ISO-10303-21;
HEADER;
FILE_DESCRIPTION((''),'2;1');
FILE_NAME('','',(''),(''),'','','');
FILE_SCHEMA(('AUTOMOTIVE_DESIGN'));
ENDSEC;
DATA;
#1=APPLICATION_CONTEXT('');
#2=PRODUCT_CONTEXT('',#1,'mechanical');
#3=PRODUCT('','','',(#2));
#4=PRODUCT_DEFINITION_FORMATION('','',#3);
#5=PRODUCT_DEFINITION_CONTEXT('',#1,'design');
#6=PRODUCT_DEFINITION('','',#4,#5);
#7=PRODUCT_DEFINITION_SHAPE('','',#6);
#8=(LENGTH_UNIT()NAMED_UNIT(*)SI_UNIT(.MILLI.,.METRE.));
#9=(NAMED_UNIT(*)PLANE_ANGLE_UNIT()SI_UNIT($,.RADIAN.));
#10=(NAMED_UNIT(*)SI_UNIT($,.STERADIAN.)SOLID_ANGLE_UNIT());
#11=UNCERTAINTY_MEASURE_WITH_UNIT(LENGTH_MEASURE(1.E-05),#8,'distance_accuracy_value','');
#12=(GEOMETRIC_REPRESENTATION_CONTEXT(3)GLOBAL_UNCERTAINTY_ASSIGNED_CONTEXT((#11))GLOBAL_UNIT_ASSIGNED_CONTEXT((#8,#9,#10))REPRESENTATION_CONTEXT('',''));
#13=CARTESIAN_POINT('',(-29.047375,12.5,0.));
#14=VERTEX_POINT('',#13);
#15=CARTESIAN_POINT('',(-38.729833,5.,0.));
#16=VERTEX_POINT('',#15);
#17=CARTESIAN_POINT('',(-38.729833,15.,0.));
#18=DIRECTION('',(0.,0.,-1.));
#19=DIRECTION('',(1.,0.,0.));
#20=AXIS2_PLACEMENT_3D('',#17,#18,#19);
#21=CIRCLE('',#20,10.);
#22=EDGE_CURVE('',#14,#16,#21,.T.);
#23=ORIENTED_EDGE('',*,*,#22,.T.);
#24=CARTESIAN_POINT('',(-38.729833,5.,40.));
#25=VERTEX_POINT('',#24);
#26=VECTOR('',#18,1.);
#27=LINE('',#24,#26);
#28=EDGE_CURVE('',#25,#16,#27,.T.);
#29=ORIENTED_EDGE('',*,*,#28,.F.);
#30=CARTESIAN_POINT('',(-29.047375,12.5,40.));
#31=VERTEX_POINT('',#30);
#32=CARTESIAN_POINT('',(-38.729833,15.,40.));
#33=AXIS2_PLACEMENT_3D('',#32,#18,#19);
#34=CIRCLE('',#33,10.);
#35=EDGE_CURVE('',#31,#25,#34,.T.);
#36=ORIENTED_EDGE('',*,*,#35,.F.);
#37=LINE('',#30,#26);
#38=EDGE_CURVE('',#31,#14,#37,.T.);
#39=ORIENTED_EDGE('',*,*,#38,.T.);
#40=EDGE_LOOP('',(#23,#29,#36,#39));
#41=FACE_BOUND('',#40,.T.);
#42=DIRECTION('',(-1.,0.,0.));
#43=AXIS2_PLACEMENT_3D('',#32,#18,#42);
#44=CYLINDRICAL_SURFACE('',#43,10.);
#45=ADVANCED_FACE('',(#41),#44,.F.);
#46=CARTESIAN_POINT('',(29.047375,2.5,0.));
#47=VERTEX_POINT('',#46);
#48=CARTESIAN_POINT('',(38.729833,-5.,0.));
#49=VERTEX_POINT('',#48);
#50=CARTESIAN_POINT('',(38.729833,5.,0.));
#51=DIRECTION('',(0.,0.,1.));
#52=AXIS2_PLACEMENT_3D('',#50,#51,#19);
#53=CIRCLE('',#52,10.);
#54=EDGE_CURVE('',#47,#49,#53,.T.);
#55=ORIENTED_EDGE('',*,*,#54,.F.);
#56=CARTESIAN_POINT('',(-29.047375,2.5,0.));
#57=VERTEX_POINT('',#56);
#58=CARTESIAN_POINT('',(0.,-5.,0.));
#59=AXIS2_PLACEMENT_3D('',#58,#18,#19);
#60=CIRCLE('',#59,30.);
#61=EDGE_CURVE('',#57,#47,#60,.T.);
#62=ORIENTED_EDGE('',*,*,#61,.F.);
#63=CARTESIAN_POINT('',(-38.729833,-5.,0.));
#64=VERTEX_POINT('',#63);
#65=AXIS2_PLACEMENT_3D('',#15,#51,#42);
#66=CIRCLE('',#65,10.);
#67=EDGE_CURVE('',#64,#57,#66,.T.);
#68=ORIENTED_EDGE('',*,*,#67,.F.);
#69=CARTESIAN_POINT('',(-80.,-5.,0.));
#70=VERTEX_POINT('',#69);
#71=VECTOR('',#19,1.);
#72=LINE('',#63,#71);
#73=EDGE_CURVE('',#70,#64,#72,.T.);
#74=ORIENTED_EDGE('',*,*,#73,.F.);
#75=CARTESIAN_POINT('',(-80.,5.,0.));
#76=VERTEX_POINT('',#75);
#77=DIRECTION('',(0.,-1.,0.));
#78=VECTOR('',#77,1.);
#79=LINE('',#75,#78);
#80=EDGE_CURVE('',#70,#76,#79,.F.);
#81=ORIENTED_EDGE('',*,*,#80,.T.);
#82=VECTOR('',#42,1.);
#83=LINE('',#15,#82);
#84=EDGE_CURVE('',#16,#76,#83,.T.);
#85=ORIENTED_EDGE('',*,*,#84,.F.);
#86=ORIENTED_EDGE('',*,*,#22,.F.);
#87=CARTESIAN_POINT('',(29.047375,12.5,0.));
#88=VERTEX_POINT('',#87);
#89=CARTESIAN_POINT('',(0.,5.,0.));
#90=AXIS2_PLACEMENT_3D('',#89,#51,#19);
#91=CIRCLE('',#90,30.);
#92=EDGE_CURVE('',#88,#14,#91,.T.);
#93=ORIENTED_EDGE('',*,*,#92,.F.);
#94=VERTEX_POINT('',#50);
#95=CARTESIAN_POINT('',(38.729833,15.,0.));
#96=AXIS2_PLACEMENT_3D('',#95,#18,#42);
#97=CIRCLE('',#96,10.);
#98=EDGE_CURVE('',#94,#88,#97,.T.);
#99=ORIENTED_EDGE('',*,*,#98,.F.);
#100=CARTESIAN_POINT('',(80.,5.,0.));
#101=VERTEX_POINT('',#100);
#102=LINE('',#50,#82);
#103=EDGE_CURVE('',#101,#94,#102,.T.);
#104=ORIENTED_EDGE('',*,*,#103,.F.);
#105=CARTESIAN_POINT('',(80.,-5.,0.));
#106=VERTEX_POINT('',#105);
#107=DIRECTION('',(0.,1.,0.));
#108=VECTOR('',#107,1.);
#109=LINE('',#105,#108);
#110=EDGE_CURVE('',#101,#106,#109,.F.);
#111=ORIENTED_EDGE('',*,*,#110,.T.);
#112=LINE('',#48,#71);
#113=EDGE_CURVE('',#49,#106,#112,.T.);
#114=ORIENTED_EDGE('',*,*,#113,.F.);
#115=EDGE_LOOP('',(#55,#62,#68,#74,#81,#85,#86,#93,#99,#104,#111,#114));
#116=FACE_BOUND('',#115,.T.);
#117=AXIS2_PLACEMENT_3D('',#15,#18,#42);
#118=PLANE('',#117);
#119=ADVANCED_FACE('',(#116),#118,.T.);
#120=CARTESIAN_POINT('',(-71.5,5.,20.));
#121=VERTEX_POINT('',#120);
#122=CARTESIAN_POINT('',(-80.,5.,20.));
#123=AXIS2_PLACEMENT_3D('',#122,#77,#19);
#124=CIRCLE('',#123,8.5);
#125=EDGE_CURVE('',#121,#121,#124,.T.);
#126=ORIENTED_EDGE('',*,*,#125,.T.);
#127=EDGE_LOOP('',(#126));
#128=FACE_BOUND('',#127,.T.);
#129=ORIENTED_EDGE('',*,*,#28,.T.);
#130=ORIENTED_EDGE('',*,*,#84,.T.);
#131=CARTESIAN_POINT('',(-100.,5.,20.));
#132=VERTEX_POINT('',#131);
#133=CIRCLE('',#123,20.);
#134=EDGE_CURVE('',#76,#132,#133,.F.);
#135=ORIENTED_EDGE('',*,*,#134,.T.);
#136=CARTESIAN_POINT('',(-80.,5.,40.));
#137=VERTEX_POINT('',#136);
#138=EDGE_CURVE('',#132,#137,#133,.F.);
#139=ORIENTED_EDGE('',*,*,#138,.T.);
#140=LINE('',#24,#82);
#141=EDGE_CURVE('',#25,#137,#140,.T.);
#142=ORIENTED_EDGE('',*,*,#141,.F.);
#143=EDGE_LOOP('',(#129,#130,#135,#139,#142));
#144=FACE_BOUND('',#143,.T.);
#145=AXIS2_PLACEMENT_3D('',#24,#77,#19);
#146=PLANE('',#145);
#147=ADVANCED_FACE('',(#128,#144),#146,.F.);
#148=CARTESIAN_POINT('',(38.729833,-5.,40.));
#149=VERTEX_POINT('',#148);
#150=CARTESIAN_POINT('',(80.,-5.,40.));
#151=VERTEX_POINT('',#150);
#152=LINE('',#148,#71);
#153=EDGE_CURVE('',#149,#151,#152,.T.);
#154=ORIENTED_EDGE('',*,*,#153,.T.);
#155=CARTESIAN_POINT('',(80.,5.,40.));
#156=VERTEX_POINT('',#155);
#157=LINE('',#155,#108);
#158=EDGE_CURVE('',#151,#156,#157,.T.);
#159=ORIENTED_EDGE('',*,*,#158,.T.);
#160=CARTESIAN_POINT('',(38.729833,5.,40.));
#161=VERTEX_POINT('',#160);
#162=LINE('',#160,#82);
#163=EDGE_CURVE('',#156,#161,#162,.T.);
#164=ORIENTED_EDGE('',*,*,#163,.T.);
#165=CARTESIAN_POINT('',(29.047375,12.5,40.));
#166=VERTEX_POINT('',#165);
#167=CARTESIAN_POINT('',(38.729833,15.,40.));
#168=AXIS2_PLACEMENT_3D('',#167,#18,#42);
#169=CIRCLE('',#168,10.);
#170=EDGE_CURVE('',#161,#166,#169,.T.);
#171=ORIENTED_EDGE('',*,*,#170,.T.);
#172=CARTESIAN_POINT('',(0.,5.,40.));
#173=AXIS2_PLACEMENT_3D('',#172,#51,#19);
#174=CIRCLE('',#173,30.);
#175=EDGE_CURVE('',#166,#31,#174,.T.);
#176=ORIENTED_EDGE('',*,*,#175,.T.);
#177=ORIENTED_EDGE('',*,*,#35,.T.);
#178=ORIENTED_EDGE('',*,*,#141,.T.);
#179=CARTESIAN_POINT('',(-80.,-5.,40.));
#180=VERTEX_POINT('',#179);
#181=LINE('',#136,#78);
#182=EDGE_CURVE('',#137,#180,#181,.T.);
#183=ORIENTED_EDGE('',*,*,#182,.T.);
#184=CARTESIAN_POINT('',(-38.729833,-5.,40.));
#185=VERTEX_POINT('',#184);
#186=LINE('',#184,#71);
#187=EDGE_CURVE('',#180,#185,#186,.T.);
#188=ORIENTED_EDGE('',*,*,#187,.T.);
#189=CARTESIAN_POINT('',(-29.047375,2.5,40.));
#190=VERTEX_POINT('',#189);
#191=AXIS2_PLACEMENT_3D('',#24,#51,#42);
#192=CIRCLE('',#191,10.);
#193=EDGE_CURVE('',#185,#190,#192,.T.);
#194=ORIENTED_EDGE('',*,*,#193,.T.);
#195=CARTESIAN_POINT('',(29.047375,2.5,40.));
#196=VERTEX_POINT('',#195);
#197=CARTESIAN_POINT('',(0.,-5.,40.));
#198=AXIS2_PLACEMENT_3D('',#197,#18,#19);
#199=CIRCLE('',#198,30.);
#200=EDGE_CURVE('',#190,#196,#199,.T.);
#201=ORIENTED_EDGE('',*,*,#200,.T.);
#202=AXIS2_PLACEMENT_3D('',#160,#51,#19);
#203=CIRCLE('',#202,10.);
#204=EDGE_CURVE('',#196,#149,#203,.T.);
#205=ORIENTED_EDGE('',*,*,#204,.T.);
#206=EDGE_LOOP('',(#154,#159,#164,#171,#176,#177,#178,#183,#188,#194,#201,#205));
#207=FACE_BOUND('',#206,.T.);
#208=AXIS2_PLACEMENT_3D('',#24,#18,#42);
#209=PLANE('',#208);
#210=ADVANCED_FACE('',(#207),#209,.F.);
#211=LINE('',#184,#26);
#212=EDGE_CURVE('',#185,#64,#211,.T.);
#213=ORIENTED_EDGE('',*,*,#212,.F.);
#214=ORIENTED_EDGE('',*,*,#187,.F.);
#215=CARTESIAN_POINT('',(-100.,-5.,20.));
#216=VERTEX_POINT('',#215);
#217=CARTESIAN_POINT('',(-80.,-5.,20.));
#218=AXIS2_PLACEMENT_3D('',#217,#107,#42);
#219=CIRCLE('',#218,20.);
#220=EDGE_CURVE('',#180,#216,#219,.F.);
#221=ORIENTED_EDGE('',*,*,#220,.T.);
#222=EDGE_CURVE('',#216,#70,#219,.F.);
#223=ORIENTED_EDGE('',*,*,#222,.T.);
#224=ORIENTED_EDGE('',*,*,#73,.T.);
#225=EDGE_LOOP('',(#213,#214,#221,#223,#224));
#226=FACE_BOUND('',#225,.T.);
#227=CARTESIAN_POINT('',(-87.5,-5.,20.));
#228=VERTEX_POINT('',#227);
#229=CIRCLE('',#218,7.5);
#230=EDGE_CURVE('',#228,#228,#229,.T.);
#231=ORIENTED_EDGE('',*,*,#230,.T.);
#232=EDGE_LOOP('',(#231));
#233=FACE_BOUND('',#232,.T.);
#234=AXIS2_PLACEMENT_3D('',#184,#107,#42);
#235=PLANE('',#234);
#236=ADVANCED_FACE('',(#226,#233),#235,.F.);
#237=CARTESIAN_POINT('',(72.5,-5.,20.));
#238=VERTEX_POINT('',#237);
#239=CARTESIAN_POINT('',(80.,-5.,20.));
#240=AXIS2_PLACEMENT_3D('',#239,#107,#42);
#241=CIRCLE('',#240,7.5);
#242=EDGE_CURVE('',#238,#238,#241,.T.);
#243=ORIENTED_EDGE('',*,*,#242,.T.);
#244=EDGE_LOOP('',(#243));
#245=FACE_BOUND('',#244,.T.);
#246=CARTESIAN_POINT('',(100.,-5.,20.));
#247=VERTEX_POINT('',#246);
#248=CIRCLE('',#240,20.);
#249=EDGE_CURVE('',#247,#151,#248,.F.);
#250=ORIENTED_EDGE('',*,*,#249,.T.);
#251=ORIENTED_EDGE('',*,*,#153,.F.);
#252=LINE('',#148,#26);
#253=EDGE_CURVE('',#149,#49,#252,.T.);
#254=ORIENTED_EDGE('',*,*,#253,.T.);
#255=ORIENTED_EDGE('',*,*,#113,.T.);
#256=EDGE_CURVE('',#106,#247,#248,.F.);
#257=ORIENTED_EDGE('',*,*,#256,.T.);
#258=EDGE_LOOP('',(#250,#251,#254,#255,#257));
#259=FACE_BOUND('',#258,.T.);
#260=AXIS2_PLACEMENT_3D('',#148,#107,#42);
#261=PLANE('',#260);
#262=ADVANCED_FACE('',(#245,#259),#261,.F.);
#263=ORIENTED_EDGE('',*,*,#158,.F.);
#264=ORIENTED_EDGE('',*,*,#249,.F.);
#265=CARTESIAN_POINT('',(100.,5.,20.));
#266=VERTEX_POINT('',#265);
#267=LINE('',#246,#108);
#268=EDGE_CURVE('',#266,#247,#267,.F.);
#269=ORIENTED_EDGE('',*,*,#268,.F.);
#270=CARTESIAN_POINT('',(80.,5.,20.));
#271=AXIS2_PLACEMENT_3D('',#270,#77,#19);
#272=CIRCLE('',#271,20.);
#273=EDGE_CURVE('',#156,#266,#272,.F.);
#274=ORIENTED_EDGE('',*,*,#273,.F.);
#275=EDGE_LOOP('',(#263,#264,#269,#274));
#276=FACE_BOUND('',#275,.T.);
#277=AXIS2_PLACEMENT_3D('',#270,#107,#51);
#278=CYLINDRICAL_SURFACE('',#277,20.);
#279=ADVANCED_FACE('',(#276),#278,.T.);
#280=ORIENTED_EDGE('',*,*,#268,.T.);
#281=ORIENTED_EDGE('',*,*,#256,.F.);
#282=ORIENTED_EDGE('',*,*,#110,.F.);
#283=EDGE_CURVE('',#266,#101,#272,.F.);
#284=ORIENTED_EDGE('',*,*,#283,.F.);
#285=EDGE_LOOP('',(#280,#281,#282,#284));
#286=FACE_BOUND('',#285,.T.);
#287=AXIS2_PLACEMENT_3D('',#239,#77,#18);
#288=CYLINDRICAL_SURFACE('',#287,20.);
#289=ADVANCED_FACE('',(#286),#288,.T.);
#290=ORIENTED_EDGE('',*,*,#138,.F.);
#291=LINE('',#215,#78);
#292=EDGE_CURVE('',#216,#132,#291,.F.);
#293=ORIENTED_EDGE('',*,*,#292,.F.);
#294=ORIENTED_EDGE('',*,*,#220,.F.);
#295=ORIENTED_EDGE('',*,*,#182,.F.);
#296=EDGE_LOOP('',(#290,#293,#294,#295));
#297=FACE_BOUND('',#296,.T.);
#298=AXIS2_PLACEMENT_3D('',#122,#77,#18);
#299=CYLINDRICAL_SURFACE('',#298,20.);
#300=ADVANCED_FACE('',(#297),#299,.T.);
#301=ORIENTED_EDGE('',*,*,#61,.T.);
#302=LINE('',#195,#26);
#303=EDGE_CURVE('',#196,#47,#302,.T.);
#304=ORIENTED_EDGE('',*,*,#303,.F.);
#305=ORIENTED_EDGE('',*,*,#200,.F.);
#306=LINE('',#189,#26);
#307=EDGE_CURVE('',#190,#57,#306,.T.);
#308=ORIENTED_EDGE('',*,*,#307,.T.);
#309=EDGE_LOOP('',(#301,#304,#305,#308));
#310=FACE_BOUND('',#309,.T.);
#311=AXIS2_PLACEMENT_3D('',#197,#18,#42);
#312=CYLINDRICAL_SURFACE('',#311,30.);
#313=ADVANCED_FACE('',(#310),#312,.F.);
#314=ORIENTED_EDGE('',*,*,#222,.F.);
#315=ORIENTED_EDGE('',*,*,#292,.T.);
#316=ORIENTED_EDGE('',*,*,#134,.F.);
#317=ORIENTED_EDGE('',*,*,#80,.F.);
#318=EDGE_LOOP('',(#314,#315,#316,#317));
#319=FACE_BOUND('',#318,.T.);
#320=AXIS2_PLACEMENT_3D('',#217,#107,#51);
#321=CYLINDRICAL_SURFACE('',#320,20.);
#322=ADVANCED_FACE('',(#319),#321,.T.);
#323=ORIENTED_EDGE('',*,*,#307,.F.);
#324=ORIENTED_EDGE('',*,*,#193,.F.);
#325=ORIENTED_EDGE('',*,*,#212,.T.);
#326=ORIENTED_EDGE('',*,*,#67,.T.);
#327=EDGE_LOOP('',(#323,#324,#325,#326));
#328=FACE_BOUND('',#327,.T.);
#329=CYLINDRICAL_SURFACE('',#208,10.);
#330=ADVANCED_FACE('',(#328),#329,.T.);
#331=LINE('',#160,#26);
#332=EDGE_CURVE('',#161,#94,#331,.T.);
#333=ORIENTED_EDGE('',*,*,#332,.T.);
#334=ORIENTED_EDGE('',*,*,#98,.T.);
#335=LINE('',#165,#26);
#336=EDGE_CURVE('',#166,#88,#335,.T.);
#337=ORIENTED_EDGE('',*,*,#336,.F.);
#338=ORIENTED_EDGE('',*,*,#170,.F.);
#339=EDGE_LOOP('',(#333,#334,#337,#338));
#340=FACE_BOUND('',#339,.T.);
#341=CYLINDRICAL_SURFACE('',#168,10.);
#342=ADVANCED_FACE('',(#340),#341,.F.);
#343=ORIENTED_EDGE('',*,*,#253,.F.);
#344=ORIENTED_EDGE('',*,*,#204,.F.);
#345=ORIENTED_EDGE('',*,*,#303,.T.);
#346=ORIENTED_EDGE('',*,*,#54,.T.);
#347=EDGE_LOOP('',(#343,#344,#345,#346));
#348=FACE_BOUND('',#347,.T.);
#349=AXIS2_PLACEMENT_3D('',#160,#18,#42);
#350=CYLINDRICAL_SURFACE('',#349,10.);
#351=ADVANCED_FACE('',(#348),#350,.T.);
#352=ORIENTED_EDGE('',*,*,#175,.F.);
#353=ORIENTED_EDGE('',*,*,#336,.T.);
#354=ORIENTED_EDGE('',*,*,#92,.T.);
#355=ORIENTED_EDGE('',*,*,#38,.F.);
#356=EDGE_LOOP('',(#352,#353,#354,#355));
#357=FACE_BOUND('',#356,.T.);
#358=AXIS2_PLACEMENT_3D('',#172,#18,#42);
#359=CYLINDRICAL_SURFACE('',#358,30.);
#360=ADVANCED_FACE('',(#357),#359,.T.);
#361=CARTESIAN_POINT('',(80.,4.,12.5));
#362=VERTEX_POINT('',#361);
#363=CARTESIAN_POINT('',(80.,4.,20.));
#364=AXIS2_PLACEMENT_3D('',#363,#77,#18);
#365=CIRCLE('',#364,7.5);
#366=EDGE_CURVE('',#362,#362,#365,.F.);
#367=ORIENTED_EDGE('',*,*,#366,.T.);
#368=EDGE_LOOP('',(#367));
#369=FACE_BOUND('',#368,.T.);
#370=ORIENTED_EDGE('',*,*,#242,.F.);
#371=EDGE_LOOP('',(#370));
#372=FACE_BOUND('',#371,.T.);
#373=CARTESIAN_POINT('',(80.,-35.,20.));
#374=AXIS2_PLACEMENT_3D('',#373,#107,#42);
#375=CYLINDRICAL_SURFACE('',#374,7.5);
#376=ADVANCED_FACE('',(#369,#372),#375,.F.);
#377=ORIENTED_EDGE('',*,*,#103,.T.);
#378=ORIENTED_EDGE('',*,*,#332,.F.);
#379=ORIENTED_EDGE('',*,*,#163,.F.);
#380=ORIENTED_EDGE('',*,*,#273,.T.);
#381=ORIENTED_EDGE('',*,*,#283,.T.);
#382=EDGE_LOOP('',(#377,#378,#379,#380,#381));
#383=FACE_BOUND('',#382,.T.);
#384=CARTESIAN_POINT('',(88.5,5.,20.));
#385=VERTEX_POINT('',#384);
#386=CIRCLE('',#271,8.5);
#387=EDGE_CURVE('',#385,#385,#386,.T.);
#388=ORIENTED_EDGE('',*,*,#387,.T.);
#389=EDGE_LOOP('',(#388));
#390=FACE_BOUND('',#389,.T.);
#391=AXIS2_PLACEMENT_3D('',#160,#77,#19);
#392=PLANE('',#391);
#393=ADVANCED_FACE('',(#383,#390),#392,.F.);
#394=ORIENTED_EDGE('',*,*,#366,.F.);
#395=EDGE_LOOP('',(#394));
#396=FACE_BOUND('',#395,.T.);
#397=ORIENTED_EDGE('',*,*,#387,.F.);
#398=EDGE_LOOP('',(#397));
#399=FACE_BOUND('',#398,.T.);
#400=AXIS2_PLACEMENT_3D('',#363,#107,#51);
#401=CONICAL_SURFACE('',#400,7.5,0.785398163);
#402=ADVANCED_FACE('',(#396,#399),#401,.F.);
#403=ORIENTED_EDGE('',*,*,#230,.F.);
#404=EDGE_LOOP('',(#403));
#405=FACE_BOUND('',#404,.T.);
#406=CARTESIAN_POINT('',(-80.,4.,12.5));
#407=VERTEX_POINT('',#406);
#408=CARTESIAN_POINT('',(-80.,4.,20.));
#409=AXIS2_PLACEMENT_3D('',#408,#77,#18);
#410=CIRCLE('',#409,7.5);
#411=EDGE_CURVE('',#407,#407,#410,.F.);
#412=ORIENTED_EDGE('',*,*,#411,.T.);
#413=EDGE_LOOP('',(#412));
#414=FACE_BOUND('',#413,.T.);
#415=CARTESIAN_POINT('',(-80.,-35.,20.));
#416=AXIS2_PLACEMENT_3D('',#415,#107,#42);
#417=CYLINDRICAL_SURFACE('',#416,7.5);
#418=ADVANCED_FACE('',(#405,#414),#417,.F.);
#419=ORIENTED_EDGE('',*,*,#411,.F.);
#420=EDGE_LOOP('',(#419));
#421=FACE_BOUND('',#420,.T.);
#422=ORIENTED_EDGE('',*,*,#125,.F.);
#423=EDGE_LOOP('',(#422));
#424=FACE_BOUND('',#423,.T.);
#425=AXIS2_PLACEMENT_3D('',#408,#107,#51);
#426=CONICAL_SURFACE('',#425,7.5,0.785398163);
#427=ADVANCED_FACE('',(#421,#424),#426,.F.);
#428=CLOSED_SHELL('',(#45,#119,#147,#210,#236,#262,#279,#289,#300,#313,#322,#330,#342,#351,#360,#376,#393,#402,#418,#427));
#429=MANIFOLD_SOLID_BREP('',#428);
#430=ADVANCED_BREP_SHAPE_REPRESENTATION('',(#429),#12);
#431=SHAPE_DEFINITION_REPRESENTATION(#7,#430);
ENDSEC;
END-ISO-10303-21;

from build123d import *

# Parameters (mm, degrees)
BOSS_EXTRUDE1_DEPTH = 40
FILLET1_R           = 20
SKETCH4_R           = 7.5
CUT_EXTRUDE1_DEPTH  = 40
CHAMFER1_SIZE       = 1


with BuildPart() as part:
    # Sketch3 → Boss-Extrude1 (new body)
    with BuildSketch(Plane.XY):
        with BuildLine():
            Line((-38.729833462, -5), (-100, -5))
            Line((-100, -5), (-100, 5))
            Line((-100, 5), (-38.729833462, 5))
            ThreePointArc((-38.729833462, 5), (-32.606109105, 7.09430585), (-29.047375097, 12.5))
            ThreePointArc((-29.047375097, 12.5), (0, 35), (29.047375097, 12.5))
            ThreePointArc((29.047375097, 12.5), (32.606109105, 7.09430585), (38.729833462, 5))
            Line((38.729833462, 5), (100, 5))
            Line((100, 5), (100, -5))
            Line((100, -5), (38.729833462, -5))
            ThreePointArc((38.729833462, -5), (32.606109105, -2.90569415), (29.047375097, 2.5))
            ThreePointArc((29.047375097, 2.5), (0, 25), (-29.047375097, 2.5))
            ThreePointArc((-29.047375097, 2.5), (-32.606109105, -2.90569415), (-38.729833462, -5))
        make_face()
    extrude(amount=BOSS_EXTRUDE1_DEPTH)

    # Fillet1
    fillet1_edges = [part.edges().sort_by_distance(p)[0] for p in [
        (100, 0, 0),
        (100, 0, 40),
        (-100, 0, 0),
        (-100, 0, 40),
    ]]
    fillet(fillet1_edges, radius=FILLET1_R - 0.0001)  # a hair under: the kernel refuses the full size

    # Sketch4 → Cut-Extrude1 (cut)
    with BuildSketch(Plane(origin=(0, 5, 0), x_dir=(1, 0, 0), z_dir=(0, 1, 0))):
        with Locations(Location((80, -20, 0), (0, 0, 180))):
            Circle(SKETCH4_R)
        with Locations(Location((-80, -20, 0), (0, 0, 180))):
            Circle(SKETCH4_R)
    extrude(amount=-CUT_EXTRUDE1_DEPTH, mode=Mode.SUBTRACT)

    # Chamfer1
    chamfer1_edges = [part.edges().sort_by_distance(p)[0] for p in [
        (87.5, 5, 20),
        (-72.5, 5, 20),
    ]]
    chamfer(chamfer1_edges, length=CHAMFER1_SIZE)


solid = part.part
